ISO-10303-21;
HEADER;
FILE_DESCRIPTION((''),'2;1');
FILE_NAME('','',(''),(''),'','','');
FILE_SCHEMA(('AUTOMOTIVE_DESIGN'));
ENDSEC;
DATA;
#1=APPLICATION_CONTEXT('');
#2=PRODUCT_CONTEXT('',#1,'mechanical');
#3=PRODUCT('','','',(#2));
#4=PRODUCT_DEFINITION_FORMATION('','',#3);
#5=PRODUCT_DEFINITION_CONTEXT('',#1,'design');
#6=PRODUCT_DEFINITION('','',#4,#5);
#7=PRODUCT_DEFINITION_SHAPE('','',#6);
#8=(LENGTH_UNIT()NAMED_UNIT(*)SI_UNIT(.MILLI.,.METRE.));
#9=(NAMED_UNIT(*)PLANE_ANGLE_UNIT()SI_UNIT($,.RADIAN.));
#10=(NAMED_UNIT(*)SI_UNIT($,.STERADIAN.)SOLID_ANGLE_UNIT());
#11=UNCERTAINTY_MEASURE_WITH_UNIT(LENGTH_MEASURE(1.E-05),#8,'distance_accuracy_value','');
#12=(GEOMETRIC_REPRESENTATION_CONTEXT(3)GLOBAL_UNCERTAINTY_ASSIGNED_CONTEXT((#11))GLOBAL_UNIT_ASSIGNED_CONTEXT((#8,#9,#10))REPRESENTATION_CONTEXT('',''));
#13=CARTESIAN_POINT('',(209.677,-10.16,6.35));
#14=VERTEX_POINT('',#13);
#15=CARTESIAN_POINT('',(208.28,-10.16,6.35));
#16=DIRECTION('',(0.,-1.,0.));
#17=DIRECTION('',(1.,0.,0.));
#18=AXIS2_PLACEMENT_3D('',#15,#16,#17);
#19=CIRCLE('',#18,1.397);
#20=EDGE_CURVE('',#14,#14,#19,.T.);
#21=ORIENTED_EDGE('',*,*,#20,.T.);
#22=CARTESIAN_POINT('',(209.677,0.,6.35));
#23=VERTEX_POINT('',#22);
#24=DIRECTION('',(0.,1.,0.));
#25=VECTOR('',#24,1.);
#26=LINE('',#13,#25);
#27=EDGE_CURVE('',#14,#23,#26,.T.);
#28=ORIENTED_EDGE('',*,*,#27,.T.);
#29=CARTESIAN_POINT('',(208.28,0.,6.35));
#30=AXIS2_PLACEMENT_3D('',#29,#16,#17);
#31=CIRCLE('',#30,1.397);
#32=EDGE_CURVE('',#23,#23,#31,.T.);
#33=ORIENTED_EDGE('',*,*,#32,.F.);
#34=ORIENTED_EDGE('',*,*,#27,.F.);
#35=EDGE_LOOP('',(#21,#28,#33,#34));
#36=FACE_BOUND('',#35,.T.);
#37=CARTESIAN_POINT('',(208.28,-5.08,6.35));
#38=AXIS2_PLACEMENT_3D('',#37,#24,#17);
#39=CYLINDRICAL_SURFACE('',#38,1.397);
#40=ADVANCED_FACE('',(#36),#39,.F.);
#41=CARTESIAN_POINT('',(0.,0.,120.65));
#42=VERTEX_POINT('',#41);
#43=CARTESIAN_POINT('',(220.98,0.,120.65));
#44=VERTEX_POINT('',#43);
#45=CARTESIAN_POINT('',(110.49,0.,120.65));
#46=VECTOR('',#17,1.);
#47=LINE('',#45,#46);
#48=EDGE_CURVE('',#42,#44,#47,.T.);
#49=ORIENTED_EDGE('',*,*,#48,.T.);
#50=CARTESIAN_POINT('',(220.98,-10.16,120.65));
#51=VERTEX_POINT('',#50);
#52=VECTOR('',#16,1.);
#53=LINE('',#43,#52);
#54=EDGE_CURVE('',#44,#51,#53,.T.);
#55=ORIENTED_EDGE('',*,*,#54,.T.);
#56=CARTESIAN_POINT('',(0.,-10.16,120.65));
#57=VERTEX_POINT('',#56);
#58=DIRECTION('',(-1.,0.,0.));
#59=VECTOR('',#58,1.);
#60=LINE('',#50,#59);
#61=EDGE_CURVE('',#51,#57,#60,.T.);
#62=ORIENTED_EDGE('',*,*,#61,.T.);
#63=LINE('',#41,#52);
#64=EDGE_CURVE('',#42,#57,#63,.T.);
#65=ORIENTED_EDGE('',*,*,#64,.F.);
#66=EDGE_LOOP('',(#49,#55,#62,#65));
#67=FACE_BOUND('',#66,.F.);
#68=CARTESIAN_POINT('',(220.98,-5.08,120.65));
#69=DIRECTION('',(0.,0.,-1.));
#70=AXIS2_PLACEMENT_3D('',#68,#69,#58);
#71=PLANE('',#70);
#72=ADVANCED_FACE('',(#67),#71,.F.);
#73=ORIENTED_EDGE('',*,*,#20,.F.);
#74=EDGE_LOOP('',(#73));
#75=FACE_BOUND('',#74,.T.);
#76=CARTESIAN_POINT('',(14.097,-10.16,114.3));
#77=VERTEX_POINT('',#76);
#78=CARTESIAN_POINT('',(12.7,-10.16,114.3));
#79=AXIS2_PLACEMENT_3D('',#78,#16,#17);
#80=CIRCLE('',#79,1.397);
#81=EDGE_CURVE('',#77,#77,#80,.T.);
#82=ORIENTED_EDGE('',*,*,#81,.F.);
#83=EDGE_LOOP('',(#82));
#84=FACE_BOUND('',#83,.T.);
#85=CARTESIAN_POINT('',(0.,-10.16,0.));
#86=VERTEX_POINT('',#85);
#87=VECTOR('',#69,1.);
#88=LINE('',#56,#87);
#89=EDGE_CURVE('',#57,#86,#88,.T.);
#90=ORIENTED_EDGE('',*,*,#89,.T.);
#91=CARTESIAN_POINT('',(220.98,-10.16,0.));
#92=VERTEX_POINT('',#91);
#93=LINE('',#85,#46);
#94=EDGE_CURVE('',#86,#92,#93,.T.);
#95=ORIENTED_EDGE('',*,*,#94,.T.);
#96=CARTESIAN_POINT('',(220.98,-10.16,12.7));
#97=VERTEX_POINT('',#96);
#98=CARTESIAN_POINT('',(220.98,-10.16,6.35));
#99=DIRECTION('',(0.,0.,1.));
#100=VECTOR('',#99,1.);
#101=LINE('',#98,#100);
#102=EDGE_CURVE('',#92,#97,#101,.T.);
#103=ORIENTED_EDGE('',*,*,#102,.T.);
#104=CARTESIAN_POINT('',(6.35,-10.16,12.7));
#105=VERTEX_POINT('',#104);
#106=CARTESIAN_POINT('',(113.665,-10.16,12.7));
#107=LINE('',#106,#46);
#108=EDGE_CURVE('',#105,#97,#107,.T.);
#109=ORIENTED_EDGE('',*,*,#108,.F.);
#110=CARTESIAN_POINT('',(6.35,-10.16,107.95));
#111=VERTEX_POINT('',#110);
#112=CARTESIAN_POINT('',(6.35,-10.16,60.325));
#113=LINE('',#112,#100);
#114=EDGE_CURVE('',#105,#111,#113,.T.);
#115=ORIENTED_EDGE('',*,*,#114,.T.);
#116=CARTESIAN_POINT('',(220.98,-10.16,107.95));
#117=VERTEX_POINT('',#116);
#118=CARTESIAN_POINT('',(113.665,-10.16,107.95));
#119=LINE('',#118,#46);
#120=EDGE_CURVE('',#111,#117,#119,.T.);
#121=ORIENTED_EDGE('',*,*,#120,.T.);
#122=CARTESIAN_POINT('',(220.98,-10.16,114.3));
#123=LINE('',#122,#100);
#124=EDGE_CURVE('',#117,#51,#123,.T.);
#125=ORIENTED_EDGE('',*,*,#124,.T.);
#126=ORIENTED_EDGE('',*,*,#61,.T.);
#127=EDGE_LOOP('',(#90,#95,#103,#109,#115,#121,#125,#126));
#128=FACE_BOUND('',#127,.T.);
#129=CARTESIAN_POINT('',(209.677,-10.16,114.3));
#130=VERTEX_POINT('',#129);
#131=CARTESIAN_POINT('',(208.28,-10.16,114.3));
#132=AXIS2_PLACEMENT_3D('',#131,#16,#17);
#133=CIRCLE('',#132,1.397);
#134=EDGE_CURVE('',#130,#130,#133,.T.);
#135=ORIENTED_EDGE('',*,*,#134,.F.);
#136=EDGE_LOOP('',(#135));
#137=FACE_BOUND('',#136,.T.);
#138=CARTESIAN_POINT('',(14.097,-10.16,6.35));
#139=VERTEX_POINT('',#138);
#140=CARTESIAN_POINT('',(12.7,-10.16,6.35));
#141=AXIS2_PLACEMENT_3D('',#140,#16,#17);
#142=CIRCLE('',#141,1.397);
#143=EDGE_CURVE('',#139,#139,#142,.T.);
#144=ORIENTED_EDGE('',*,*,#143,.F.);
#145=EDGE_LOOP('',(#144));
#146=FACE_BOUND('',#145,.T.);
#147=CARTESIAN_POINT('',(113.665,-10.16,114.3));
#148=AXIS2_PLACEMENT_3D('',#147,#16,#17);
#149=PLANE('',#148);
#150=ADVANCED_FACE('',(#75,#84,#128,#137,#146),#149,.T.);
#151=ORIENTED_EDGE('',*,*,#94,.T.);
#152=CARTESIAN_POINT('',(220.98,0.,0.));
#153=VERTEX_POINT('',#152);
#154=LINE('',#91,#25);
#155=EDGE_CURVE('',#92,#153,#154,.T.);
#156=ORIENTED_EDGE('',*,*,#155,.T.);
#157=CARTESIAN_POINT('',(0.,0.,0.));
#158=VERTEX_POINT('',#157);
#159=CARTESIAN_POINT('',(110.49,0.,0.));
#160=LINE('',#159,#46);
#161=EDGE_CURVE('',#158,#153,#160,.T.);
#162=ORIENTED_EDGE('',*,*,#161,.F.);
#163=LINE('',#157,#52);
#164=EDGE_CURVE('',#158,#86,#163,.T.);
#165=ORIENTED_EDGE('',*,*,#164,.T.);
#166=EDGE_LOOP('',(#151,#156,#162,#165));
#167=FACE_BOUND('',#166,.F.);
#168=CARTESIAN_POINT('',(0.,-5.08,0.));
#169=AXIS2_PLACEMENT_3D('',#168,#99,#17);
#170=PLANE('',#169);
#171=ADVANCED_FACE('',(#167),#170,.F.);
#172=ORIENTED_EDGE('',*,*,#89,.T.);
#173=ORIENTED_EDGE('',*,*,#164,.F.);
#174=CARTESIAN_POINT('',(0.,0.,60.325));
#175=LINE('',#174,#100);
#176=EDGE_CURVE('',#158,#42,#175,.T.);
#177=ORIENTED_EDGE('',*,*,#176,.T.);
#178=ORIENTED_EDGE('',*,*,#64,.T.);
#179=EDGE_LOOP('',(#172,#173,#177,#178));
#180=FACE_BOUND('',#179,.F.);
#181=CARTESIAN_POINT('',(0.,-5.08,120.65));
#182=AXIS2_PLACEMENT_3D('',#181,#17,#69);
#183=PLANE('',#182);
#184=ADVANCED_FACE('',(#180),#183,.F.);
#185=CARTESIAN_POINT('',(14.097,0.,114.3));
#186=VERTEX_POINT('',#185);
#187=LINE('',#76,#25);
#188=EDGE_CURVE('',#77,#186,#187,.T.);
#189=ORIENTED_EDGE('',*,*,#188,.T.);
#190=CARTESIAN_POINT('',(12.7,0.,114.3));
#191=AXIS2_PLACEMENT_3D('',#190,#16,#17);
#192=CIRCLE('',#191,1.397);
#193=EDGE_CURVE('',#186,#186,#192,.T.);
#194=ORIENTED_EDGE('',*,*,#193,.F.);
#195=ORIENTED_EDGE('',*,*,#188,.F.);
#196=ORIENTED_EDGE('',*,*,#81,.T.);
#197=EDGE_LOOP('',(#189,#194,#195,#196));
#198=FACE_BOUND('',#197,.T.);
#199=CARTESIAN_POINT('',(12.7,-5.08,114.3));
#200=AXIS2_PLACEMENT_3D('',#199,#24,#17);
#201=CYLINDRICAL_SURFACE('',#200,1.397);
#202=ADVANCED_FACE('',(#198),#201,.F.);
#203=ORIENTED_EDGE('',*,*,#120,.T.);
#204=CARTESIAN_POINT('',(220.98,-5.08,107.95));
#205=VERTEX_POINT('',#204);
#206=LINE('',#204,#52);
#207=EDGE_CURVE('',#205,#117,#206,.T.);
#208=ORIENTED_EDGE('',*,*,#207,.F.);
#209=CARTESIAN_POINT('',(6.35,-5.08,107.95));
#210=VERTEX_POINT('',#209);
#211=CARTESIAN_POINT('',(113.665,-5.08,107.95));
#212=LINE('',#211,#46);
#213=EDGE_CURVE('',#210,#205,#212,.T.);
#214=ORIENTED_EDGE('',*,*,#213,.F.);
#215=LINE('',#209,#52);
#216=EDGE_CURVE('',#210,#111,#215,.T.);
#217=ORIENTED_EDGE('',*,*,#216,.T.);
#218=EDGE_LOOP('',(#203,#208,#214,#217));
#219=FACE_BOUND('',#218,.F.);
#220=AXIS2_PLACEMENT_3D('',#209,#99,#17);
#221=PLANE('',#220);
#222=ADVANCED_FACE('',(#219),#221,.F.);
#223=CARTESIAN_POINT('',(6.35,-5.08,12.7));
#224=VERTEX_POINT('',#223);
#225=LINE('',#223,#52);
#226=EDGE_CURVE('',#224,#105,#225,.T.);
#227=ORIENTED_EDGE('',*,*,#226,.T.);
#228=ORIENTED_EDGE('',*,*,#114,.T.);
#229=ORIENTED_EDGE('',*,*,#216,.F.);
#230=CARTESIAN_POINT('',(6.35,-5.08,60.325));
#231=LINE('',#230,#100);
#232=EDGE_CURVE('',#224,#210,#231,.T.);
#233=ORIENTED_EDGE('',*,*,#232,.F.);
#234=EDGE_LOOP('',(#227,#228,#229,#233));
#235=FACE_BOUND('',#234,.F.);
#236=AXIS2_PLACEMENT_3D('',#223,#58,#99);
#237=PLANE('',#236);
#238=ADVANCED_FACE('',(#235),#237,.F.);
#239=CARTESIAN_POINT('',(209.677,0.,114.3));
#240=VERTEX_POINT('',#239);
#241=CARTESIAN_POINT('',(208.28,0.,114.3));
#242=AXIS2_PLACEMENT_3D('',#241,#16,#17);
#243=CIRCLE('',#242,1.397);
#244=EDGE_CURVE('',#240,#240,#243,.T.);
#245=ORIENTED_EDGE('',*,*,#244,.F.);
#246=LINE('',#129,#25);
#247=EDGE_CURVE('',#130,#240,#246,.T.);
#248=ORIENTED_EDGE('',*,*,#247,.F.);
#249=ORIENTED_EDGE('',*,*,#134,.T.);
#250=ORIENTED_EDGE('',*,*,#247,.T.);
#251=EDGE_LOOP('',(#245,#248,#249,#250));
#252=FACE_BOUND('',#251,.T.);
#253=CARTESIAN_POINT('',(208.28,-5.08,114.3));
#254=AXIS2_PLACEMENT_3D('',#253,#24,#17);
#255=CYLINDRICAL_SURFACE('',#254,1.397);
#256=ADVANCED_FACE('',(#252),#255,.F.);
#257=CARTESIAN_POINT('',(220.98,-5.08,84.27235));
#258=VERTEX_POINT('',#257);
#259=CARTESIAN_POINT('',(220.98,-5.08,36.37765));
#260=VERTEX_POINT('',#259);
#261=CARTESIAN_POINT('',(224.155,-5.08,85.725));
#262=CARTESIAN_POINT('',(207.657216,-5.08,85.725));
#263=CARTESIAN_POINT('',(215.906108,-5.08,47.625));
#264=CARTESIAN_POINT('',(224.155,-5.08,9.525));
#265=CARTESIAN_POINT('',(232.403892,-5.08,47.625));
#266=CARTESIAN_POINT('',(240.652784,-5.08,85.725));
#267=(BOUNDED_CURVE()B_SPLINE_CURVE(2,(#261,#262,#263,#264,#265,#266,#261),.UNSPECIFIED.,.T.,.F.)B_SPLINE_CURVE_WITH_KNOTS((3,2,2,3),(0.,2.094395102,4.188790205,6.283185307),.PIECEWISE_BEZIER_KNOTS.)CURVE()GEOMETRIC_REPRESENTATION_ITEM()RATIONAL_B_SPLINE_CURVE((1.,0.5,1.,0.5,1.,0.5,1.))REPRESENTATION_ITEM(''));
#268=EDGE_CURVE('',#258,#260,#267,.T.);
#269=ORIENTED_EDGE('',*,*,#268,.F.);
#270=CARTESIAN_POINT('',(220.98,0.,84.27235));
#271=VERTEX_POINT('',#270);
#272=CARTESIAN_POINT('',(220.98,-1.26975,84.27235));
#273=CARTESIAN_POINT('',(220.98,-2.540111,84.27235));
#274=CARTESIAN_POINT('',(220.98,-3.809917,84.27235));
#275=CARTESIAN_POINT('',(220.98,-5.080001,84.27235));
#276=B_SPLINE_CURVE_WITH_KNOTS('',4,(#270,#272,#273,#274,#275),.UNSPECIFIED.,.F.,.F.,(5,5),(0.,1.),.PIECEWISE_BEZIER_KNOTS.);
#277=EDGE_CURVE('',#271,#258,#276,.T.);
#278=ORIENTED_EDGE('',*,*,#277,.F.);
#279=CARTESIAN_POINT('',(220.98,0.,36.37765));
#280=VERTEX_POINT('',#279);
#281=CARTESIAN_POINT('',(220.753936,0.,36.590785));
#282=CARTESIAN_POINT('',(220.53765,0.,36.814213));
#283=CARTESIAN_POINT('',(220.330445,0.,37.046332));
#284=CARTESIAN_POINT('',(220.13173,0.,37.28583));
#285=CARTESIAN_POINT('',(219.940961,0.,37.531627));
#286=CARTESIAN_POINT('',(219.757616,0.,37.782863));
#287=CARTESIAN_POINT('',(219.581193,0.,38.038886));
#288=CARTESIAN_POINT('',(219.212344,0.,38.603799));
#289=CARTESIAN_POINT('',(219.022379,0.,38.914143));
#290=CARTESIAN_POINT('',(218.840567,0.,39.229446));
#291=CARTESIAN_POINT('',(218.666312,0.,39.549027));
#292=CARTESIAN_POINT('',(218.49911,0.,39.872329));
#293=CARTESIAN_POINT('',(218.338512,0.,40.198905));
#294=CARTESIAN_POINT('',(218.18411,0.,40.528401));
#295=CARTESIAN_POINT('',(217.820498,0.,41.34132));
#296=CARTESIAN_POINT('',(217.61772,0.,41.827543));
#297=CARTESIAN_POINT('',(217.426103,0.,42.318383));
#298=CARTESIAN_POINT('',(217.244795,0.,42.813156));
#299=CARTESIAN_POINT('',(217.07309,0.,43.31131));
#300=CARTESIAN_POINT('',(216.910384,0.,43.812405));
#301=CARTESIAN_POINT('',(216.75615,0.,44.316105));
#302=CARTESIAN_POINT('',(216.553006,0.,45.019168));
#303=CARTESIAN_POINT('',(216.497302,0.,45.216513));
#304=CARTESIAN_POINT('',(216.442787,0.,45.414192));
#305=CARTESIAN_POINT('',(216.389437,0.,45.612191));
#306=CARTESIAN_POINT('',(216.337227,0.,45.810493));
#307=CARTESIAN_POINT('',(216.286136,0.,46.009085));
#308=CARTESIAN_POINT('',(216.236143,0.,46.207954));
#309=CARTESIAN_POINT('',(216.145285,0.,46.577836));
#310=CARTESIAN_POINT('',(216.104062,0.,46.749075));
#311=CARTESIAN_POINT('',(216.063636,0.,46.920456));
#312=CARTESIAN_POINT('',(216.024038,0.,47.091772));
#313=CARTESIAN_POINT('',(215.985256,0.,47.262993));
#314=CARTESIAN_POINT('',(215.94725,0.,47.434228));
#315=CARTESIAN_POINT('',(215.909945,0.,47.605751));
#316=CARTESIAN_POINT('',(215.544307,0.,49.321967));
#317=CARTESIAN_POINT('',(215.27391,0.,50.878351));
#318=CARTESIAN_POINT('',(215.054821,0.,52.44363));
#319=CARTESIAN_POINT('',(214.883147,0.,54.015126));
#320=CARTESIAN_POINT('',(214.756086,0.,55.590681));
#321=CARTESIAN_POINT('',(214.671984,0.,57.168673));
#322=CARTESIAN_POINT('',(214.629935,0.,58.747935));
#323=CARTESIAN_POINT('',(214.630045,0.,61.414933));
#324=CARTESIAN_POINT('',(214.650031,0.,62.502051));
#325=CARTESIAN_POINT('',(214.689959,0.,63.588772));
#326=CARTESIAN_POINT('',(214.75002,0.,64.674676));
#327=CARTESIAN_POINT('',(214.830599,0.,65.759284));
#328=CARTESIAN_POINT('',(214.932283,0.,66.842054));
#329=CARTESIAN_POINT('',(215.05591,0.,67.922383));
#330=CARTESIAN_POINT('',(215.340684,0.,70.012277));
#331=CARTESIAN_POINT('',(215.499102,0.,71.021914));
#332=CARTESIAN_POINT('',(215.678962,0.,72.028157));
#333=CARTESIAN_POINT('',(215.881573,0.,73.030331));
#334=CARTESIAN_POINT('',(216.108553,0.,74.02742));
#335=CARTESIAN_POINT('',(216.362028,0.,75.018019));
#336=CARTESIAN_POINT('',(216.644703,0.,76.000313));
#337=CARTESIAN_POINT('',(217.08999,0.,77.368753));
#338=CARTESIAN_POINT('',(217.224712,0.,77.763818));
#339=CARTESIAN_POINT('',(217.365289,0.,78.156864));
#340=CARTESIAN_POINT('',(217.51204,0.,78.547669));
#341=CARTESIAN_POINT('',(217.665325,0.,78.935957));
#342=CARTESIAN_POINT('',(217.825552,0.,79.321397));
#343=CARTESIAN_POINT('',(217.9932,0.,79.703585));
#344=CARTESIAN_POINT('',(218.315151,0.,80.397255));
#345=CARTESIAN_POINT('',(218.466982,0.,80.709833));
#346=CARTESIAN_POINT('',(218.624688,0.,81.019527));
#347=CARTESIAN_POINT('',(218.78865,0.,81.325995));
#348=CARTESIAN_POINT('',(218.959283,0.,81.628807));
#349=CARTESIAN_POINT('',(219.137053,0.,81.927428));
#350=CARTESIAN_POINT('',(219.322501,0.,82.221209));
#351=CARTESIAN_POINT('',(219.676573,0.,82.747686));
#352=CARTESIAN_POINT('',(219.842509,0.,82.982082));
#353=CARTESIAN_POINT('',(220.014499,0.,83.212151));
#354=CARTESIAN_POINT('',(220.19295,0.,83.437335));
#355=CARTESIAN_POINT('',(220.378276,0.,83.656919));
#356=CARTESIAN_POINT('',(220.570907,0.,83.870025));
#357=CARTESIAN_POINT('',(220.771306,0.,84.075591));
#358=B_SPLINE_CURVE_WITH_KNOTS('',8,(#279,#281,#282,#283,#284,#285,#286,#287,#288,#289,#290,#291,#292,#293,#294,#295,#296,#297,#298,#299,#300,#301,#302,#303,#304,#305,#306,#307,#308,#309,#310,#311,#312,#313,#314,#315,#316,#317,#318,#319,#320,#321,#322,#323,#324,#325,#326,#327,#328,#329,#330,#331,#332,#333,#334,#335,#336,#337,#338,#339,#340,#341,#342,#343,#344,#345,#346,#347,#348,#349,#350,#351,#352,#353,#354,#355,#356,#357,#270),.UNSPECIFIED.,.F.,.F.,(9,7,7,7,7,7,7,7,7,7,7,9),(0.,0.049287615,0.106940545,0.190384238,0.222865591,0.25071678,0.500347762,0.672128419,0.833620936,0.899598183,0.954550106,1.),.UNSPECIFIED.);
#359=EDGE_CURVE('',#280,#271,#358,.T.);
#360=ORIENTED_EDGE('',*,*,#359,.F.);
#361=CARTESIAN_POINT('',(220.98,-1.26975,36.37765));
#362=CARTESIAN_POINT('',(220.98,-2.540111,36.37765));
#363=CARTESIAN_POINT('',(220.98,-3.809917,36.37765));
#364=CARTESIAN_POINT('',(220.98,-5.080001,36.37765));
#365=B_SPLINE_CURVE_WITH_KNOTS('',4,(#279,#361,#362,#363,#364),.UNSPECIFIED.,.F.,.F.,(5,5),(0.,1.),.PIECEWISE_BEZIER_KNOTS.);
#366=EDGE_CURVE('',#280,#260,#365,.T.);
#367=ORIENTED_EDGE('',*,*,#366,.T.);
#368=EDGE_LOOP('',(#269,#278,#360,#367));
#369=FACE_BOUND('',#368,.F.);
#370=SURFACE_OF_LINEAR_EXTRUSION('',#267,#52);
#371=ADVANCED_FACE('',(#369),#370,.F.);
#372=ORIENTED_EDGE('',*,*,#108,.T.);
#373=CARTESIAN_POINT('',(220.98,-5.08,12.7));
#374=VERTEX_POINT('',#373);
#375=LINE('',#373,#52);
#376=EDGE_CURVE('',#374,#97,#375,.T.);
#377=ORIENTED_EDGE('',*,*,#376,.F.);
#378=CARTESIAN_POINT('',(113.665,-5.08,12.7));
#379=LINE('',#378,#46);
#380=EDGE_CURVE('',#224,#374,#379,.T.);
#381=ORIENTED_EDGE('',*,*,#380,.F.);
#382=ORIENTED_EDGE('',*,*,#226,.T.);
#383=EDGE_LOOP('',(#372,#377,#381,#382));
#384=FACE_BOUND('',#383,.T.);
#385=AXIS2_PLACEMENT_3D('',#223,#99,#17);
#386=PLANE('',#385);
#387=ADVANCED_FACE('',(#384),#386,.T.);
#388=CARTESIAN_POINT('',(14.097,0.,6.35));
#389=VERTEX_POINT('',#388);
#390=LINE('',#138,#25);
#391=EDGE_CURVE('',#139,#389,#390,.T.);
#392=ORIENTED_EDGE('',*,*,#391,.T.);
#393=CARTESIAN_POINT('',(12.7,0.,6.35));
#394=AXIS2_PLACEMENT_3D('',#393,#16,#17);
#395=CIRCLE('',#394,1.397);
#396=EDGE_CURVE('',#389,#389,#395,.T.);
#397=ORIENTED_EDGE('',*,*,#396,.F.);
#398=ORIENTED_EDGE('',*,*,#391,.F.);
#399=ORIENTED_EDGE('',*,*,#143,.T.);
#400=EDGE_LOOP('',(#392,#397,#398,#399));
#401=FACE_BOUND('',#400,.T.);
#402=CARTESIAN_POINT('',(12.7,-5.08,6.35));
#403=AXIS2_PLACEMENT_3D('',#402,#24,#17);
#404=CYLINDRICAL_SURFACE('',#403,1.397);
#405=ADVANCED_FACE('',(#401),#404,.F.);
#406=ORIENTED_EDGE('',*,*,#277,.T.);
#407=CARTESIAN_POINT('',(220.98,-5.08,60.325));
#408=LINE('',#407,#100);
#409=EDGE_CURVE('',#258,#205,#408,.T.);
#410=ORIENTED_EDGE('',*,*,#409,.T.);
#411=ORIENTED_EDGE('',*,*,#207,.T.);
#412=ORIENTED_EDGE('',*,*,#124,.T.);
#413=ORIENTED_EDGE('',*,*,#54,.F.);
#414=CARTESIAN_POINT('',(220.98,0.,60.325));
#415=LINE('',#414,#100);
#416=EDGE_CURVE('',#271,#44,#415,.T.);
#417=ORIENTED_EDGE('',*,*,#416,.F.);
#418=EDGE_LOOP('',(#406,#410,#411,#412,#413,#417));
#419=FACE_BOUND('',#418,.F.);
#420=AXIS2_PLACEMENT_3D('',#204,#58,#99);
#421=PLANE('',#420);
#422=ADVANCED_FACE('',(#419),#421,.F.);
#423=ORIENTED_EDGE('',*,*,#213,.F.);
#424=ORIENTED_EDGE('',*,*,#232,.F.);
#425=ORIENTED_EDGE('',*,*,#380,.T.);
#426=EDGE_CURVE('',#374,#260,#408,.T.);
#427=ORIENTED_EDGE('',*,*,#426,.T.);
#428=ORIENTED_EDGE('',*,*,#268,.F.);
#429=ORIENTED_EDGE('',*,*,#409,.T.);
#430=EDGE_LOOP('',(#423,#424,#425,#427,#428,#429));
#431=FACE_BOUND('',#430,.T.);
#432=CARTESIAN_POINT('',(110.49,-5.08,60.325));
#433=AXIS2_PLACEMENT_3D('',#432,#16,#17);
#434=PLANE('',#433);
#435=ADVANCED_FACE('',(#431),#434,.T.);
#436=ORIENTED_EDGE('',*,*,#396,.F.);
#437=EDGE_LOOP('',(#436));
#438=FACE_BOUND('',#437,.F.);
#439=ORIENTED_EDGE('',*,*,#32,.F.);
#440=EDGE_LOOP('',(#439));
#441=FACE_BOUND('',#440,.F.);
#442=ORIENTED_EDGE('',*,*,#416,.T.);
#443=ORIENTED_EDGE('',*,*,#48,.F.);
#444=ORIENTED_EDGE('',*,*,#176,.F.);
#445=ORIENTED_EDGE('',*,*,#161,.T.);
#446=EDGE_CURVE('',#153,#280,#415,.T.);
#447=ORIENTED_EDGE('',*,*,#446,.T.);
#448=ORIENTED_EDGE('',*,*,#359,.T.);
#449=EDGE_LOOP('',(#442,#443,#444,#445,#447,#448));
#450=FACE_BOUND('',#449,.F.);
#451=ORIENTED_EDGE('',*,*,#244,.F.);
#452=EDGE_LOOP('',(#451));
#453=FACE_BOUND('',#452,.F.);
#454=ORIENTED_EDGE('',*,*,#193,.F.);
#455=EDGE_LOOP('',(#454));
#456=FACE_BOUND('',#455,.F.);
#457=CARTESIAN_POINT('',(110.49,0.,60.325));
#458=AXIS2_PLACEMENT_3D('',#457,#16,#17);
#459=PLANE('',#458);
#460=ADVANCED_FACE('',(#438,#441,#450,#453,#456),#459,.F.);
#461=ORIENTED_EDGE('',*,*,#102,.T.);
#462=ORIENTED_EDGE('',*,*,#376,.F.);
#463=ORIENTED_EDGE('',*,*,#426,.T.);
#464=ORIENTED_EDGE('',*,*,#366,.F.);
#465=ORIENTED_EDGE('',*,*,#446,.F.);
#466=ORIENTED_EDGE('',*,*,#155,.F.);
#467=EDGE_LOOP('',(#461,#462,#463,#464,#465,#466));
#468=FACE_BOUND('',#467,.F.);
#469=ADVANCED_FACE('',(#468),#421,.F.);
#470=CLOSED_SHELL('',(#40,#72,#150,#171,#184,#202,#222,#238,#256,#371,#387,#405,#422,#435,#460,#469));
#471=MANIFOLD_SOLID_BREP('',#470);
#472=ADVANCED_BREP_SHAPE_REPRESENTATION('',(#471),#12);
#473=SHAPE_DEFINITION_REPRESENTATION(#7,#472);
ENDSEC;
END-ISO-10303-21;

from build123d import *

# Parameters (mm, degrees)
F0_W     = 220.98
F0_H     = 120.65
F0_R     = 1.397
F1_DEPTH = 5.08
F2_W     = 214.63
F2_H     = 12.7
F2_R     = 1.397
F2_W_2   = 6.35
F2_H_2   = 95.25
F3_DEPTH = 5.08
F5_DEPTH = 25.4


# Not quite as in the source:
# - a feature names something its author has since deleted; it is built from what else it names


with BuildPart() as f1:
    # F0 (on Front) → F1 (new body)
    with BuildSketch(Plane.XZ):
        with Locations((110.49, 60.325)):
            Rectangle(F0_W, F0_H)
        with Locations((12.7, 6.35)):
            Circle(F0_R, mode=Mode.SUBTRACT)
        with Locations((208.28, 6.35)):
            Circle(F0_R, mode=Mode.SUBTRACT)
        with Locations((12.7, 114.3)):
            Circle(F0_R, mode=Mode.SUBTRACT)
        with Locations((208.28, 114.3)):
            Circle(F0_R, mode=Mode.SUBTRACT)
    extrude(amount=F1_DEPTH)

    # F2 (on face) → F3 (join)
    with BuildSketch(Plane.XZ.offset(5.08)):
        with Locations((113.665, 114.3)):
            Rectangle(F2_W, F2_H)
        with Locations((12.7, 114.3)):
            Circle(F2_R, mode=Mode.SUBTRACT)
        with Locations((208.28, 114.3)):
            Circle(F2_R, mode=Mode.SUBTRACT)
        with Locations((113.665, 6.35)):
            Rectangle(F2_W, F2_H)
        with Locations((12.7, 6.35)):
            Circle(F2_R, mode=Mode.SUBTRACT)
        with Locations((208.28, 6.35)):
            Circle(F2_R, mode=Mode.SUBTRACT)
        with Locations((3.175, 60.325)):
            Rectangle(F2_W_2, F2_H_2)
        with Locations((3.175, 114.3)):
            Rectangle(F2_W_2, F2_H)
        with Locations((3.175, 6.35)):
            Rectangle(F2_W_2, F2_H)
    extrude(amount=F3_DEPTH)

    # F4 (on face) → F5 (cut)
    with BuildSketch(Plane.XZ.offset(5.08)):
        with BuildLine():
            add(Edge.make_bspline(
                [(224.155, 85.725), (207.6572160579, 85.725), (215.906108029, 47.625), (224.155, 9.525), (232.403891971, 47.625), (240.6527839421, 85.725), (224.155, 85.725)],
                knots=[0, 0, 0, 2.0943951024, 2.0943951024, 4.1887902048, 4.1887902048, 6.2831853072, 6.2831853072, 6.2831853072], degree=2, weights=[1, 0.5, 1, 0.5, 1, 0.5, 1]))
        make_face()
    extrude(amount=-F5_DEPTH, mode=Mode.SUBTRACT)


solid = f1.part
